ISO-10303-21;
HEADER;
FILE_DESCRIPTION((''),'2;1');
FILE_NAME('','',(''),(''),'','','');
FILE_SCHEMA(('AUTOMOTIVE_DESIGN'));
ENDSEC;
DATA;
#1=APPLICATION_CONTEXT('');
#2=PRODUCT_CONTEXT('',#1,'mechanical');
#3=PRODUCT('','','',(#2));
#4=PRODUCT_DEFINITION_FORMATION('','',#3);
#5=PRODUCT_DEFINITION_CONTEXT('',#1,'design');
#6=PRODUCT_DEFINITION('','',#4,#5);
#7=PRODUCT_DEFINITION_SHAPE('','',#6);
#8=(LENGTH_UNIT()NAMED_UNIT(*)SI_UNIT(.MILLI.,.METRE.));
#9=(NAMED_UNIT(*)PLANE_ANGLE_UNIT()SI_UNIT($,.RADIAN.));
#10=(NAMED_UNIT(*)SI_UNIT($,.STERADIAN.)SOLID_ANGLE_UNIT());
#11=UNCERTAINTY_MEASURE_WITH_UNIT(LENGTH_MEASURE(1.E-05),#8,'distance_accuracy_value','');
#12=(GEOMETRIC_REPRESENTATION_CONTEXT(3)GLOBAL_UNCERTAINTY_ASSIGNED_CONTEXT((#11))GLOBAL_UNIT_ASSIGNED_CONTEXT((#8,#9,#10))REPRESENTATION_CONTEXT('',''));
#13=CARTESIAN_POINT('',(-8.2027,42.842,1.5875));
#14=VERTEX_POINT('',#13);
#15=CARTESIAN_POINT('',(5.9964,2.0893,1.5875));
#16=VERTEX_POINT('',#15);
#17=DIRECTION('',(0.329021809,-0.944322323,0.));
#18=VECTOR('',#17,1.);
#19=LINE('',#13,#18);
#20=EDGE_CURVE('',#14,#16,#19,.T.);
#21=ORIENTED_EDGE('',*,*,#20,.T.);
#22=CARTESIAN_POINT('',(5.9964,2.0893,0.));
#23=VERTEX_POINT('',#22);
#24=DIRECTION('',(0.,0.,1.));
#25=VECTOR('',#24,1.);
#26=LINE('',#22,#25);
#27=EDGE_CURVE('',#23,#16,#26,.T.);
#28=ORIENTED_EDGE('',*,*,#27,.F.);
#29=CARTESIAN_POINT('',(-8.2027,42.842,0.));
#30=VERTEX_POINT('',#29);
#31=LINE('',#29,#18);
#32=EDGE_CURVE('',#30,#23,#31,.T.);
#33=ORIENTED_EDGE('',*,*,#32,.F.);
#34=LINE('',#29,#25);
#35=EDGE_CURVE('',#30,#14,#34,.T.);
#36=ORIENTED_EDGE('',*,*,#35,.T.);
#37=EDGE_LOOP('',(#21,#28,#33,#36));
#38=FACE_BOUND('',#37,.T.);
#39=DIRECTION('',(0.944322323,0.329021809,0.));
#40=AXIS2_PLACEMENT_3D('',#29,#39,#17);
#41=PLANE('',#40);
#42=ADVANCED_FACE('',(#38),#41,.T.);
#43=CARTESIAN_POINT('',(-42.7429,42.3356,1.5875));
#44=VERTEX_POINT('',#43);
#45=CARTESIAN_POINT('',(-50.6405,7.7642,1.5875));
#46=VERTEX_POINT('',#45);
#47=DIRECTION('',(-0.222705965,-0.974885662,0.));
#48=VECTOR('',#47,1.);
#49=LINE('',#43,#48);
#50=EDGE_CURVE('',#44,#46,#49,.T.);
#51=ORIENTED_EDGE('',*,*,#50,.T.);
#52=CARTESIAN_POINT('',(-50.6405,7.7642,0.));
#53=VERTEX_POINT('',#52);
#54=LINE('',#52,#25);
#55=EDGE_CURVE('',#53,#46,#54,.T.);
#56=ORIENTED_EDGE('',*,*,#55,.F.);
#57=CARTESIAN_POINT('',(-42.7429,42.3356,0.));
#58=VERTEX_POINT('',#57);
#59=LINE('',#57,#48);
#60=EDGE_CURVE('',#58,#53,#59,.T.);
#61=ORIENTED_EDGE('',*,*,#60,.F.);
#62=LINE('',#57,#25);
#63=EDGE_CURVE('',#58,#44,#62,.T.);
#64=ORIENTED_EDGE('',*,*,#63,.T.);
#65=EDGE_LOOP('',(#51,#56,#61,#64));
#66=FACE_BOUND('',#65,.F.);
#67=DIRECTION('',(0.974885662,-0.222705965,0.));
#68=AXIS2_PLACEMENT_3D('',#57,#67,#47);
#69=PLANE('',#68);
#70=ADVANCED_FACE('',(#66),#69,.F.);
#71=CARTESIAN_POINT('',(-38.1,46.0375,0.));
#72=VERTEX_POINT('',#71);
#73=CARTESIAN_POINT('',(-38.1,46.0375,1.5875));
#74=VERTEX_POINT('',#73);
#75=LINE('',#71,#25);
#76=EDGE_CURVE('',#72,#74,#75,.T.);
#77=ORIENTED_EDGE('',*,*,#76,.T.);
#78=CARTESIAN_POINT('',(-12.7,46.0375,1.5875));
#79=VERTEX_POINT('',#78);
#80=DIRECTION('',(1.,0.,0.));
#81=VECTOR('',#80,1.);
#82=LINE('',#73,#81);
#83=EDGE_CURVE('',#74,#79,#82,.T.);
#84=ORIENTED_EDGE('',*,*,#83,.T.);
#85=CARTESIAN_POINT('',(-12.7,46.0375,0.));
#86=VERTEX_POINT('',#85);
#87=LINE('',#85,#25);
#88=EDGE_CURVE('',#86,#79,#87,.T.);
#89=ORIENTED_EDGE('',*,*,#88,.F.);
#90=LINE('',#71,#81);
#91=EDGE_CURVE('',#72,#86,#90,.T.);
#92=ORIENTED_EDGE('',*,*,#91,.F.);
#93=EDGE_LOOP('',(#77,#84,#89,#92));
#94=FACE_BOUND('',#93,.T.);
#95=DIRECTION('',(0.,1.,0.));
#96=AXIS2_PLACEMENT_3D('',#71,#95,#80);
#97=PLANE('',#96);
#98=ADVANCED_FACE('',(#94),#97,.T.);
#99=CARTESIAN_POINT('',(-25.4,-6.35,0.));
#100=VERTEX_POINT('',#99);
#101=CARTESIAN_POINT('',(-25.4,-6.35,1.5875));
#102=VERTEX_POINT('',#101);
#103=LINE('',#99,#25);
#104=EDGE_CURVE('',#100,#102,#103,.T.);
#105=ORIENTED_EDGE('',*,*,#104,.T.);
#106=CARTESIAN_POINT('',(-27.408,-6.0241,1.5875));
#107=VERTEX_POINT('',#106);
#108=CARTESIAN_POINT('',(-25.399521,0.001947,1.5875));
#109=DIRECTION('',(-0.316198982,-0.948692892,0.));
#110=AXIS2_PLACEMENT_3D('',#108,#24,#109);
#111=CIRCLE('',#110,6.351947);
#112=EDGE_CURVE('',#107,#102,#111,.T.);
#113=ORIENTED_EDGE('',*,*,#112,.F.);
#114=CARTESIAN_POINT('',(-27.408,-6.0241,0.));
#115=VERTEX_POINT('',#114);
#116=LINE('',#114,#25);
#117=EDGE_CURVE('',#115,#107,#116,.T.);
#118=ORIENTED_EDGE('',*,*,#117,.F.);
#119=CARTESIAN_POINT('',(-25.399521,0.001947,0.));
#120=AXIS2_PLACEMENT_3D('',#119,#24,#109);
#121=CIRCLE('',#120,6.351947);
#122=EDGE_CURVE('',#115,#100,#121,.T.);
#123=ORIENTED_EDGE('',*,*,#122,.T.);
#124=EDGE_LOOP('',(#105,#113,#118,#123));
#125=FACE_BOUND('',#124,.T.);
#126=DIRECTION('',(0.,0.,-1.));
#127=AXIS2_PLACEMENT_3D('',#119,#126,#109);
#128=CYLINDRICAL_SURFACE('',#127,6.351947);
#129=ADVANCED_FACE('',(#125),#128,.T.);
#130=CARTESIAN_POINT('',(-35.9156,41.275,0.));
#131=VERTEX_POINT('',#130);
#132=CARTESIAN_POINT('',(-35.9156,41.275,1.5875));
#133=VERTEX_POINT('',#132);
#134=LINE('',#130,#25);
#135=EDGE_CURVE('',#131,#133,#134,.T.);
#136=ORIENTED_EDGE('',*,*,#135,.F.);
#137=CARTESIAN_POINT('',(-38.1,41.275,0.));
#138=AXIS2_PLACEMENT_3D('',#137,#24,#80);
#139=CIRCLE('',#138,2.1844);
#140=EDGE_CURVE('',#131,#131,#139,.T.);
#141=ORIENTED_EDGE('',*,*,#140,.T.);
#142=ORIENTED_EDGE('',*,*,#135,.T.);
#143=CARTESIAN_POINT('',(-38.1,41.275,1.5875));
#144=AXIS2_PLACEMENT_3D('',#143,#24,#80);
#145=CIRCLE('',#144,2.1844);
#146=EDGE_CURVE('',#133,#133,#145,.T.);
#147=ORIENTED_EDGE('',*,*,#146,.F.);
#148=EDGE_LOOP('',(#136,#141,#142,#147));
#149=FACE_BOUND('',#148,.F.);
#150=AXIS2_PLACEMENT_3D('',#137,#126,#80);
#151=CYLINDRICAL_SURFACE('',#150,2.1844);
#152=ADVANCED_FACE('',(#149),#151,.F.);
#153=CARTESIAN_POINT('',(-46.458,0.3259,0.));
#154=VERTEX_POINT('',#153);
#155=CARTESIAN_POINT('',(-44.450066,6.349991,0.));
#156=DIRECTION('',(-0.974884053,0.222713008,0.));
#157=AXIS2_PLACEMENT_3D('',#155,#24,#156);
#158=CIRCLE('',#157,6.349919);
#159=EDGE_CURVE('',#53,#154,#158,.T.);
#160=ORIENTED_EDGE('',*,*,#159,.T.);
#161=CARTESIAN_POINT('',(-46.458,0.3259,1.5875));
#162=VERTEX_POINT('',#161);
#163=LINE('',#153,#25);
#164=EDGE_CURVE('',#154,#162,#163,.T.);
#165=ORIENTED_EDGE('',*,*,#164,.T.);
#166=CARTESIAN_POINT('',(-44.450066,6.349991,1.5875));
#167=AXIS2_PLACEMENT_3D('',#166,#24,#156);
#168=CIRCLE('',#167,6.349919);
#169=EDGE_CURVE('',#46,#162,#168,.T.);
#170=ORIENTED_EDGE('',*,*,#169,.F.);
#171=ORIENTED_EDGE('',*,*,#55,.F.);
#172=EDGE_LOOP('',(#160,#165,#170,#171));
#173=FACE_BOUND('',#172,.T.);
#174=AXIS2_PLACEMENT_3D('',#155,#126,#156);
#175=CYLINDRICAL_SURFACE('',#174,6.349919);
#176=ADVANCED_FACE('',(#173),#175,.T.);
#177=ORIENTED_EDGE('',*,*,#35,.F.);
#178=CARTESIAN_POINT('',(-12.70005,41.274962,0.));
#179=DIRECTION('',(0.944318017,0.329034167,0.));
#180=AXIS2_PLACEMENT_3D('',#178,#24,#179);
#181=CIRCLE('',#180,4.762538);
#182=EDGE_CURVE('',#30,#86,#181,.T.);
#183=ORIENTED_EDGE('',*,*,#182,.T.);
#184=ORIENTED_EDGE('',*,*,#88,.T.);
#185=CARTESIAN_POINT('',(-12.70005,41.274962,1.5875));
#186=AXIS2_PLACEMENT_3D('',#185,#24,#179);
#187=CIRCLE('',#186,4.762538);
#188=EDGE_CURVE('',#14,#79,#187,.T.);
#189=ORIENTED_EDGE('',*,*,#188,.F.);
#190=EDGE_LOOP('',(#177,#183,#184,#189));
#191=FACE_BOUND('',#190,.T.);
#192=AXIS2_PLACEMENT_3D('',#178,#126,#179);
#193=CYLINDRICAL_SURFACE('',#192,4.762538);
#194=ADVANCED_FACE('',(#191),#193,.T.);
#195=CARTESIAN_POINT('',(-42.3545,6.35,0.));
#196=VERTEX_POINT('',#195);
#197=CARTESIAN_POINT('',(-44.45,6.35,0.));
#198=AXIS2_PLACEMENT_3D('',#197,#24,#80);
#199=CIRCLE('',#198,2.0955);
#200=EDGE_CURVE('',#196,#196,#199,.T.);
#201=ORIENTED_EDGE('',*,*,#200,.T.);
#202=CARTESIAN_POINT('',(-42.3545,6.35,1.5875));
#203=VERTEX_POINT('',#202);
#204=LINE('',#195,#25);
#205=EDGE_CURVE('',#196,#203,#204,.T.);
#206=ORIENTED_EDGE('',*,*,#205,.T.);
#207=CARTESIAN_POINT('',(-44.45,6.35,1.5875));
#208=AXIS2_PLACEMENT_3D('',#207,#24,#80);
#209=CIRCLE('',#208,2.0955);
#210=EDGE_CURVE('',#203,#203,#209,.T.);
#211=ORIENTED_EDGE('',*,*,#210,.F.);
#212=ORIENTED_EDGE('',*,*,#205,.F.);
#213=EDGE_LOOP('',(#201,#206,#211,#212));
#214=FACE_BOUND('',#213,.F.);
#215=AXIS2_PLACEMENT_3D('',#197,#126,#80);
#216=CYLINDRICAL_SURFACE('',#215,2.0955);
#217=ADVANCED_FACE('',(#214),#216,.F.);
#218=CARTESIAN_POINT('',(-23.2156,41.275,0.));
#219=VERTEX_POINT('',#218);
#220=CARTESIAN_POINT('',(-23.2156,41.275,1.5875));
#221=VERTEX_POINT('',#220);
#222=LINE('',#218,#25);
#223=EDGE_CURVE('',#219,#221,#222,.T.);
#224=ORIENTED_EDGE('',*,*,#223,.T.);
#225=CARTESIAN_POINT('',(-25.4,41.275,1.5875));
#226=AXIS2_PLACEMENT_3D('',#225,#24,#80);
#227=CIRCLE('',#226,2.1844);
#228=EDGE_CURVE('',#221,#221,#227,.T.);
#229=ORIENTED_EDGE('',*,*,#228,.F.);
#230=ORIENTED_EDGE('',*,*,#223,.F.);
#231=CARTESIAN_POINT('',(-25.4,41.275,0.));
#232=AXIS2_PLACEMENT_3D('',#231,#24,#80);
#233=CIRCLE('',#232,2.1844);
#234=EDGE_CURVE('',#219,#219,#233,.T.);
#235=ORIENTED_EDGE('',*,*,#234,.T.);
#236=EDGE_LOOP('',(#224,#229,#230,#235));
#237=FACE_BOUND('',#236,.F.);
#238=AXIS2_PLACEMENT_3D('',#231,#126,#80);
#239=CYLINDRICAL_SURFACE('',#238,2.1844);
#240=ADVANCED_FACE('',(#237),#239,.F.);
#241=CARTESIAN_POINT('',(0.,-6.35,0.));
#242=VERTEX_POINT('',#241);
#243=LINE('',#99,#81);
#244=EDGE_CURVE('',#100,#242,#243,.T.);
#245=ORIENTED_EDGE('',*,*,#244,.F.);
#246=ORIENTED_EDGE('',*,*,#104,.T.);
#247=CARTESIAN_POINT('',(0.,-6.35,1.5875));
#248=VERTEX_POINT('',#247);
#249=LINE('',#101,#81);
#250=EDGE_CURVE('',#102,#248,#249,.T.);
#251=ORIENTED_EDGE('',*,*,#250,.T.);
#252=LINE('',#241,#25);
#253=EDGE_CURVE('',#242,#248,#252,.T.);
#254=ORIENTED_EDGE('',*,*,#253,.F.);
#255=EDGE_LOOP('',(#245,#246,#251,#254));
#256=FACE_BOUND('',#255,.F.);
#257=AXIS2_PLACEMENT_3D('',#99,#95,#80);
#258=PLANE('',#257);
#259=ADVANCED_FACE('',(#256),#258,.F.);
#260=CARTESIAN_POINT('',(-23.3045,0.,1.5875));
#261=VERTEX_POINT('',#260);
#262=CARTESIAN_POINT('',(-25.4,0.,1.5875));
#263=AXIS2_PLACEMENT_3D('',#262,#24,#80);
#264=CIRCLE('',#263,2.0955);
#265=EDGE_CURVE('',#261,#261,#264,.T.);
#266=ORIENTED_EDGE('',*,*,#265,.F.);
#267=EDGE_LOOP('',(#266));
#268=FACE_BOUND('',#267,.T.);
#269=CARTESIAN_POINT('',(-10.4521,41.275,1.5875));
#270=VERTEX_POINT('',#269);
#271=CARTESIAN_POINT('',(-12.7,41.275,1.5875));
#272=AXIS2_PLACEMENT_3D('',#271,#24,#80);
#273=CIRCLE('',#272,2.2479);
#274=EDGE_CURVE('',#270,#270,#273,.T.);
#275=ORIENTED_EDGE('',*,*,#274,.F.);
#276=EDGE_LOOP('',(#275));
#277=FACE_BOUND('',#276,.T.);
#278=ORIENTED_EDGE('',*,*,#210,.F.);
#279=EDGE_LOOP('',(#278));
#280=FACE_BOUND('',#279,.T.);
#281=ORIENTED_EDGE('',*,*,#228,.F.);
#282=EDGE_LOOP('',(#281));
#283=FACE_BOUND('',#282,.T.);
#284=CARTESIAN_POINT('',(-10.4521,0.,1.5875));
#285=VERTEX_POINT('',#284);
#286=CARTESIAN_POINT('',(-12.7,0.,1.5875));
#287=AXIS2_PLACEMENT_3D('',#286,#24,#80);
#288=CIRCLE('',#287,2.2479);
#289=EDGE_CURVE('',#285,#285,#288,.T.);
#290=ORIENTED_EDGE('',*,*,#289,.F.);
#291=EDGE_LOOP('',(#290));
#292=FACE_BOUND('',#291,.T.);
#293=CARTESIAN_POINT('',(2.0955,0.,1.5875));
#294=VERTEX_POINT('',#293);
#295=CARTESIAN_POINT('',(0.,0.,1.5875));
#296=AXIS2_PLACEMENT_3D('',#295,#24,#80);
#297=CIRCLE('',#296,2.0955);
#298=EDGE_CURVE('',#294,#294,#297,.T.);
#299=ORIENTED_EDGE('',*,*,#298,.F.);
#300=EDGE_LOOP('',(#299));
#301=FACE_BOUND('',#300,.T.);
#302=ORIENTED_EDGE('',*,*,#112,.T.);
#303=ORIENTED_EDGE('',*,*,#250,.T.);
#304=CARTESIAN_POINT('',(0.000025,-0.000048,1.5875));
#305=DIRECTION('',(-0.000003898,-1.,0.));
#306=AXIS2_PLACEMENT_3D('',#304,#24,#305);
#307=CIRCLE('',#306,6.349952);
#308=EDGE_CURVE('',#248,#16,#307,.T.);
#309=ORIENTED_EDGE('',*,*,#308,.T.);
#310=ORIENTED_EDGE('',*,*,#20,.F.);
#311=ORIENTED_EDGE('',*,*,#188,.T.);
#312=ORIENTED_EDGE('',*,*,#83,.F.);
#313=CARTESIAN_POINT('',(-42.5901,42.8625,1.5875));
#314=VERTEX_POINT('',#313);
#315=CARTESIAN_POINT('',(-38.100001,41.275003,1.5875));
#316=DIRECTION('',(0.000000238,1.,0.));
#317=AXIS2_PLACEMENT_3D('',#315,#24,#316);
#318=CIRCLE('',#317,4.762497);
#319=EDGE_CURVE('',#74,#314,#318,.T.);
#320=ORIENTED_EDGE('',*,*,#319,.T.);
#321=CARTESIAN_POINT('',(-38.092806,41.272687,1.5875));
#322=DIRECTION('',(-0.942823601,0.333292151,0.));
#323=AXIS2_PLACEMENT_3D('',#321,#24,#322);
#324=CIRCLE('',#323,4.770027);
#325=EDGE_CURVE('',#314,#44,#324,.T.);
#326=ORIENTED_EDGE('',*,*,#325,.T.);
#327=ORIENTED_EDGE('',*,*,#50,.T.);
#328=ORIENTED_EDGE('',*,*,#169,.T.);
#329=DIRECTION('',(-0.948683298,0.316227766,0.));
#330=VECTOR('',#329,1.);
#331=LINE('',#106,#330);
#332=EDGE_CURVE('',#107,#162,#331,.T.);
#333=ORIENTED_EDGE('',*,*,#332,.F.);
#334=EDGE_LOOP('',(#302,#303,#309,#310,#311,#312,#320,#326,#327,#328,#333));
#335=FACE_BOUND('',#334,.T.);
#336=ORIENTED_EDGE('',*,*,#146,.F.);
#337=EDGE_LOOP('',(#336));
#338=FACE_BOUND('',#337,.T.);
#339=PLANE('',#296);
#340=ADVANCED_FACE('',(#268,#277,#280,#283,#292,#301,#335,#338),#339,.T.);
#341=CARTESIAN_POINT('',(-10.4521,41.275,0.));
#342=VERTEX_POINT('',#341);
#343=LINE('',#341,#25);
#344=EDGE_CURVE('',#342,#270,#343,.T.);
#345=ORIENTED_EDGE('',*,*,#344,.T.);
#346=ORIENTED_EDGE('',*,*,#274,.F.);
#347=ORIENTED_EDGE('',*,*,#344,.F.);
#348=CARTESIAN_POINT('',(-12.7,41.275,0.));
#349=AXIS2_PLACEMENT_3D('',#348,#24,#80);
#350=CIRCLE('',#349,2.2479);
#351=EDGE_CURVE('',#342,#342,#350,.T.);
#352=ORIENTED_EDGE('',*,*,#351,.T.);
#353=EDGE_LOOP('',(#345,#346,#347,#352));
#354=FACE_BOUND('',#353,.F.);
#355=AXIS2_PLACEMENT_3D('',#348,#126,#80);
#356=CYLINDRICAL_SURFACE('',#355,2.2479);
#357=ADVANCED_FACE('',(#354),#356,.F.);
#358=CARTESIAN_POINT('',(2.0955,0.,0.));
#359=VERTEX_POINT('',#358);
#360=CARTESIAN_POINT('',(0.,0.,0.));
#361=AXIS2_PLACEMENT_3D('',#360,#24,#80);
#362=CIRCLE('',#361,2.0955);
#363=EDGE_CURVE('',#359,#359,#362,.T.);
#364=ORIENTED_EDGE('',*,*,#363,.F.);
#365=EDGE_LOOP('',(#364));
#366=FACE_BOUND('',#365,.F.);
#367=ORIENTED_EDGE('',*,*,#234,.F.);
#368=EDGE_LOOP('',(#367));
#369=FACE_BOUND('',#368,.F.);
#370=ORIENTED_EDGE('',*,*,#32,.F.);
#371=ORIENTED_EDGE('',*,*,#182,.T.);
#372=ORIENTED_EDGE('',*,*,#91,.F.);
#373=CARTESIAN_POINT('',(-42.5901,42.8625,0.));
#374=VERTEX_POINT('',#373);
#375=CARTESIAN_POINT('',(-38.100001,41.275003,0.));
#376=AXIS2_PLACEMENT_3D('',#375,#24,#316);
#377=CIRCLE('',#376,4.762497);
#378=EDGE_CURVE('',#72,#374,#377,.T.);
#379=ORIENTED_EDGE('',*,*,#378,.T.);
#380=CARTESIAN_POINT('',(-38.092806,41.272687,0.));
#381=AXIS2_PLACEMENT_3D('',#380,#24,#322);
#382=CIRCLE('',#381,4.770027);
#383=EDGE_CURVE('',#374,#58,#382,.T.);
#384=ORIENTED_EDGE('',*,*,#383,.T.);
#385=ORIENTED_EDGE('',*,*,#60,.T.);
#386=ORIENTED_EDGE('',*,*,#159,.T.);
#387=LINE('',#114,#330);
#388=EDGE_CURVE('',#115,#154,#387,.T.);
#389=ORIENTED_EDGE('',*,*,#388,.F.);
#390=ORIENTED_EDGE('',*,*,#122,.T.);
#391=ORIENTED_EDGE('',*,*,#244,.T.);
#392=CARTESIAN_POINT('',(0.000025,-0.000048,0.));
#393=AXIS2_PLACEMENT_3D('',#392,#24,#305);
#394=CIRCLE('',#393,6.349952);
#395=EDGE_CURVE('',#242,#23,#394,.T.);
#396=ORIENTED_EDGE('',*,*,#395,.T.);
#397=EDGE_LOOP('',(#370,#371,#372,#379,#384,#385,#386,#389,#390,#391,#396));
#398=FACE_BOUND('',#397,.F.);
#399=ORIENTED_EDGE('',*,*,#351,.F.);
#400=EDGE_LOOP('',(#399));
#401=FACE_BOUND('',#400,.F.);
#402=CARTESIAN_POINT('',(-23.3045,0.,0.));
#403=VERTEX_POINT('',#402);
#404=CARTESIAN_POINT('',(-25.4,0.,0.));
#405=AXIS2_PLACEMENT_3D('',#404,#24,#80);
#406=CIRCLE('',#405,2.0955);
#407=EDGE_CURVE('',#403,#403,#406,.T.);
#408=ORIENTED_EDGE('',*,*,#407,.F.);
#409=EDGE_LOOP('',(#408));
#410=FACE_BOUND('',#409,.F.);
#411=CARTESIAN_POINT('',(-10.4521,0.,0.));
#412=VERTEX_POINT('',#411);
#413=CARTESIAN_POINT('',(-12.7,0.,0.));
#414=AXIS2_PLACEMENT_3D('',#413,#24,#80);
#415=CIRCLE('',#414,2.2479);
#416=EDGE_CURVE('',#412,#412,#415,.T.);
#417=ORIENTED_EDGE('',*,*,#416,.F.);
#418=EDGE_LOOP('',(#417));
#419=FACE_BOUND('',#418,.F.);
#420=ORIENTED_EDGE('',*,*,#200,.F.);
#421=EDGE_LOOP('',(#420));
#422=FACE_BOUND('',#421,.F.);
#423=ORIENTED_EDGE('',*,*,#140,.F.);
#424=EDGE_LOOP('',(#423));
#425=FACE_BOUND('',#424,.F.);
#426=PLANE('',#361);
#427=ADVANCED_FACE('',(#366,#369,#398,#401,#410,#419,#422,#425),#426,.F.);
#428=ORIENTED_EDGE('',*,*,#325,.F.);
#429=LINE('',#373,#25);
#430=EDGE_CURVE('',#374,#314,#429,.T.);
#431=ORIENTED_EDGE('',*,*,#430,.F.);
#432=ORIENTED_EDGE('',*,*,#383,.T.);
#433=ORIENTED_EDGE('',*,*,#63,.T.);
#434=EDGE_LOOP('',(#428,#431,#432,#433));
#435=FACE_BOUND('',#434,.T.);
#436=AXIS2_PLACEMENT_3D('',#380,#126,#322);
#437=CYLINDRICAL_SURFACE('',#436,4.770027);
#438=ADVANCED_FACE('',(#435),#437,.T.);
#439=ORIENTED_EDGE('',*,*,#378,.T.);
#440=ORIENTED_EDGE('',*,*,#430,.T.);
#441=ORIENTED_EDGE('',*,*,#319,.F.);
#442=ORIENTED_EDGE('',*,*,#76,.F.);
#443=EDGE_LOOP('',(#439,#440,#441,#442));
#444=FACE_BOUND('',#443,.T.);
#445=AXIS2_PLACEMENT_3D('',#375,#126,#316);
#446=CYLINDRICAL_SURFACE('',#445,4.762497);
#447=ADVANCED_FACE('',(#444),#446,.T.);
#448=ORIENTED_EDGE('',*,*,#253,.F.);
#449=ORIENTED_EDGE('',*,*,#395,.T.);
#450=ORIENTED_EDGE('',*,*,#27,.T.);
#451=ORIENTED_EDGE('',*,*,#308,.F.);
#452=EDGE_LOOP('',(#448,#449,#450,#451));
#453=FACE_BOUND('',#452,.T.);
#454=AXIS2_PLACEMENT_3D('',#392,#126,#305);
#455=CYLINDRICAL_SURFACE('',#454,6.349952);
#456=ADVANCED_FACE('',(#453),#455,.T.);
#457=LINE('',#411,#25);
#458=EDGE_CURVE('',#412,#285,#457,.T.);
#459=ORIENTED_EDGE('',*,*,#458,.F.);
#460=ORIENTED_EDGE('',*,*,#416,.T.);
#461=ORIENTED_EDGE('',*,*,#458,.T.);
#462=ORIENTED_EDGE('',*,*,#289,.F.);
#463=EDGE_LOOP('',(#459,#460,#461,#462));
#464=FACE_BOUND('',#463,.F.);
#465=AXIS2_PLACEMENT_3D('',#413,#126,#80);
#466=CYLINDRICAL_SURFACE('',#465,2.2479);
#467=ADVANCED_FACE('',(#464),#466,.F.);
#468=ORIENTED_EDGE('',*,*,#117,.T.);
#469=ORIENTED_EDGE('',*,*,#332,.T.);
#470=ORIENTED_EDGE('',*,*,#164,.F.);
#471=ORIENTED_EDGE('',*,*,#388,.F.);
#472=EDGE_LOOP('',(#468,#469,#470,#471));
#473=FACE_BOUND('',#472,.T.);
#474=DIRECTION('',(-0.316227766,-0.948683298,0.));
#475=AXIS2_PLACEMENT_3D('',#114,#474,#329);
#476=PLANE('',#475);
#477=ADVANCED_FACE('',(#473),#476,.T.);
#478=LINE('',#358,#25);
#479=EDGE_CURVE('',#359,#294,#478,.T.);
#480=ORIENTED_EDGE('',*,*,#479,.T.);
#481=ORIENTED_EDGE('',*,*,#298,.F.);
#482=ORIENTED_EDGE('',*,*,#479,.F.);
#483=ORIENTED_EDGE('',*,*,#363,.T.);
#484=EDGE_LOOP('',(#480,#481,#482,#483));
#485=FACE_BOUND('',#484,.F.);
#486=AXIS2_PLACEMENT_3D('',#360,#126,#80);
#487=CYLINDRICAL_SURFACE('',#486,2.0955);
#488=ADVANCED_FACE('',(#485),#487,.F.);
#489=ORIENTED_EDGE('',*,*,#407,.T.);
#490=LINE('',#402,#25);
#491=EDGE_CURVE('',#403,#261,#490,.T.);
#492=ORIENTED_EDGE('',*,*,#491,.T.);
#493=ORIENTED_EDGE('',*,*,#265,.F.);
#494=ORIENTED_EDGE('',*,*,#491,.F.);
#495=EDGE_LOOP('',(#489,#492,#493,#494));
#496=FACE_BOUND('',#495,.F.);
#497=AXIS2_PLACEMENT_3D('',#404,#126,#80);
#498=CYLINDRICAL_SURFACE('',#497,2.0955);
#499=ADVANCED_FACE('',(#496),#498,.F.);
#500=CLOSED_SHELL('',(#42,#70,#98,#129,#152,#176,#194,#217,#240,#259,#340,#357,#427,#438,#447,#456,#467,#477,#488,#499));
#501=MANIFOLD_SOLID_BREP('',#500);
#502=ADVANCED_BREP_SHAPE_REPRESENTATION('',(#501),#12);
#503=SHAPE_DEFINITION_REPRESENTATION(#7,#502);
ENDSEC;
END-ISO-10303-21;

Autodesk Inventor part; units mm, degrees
ref_plane "YZ Plane" through (0, 0, 0) normal (1, 0, 0) x (0, 1, 0)
ref_plane "XZ Plane" through (0, 0, 0) normal (0, 1, 0) x (-1, 0, 0)
ref_plane "XY Plane" through (0, 0, 0) normal (0, 0, 1) x (1, 0, 0)
sketch "main" plane through (0, 0, 0) normal (0, 0, 1) x (1, 0, 0)
  circle A0 centre (-38.8868, 18.5788) radius 2.2479
  circle A1 centre (2.3882, 18.5788) radius 2.2479
  circle A2 centre (2.3882, 43.9788) radius 2.1844
  arc A3 (3.9757, 48.4689) -> (3.4489, 48.6217) centre (2.3882, 43.9788) ccw
  arc A4 (3.9552, 14.0814) -> (7.1507, 18.5788) centre (2.3882, 18.5788) ccw
  circle A5 centre (-38.8868, 31.2788) radius 2.0955
  circle A6 centre (-38.8868, 5.8788) radius 2.0955
  arc A7 (-44.9109, 33.2868) -> (-45.2368, 31.2788) centre (-38.8868, 31.2788) ccw
  arc A8 (-45.2368, 5.8788) -> (-36.7975, -0.1177) centre (-38.8868, 5.8788) ccw
  circle A9 centre (-32.5368, 50.3288) radius 2.0955
  arc A10 (-31.1226, 56.5193) -> (-38.5609, 52.3368) centre (-32.5368, 50.3288) ccw
  line L0 (-44.9109, 33.2868) -> (-38.5609, 52.3368)
  line L1 (3.4489, 48.6217) -> (-31.1226, 56.5193)
  line L2 (3.9552, 14.0814) -> (-36.7975, -0.1177)
  line L3 (-45.2368, 31.2788) -> (-45.2368, 5.8788)
  arc A11 (7.1507, 43.9788) -> (3.4489, 48.6217) centre (2.3882, 43.9788) ccw
  line L4 (7.1507, 43.9788) -> (7.1507, 18.5788)
  circle A12 centre (2.3882, 31.2788) radius 2.1844
  point P0 (-4.3882, 4.0845)
  dimension "d11" = 4.4958
  dimension "d12" = 4.4958
  dimension "d13" = 9.525
  dimension "d14" = 9.525
  dimension "d15" = 4.191
  dimension "d16" = 4.191
  dimension "d17" = 41.275
  dimension "d18" = 41.275
  dimension "d19" = 25.4
  dimension "d20" = 4.3688
  dimension "d21" = 12.7
sketch "Sketch1" plane through (0, 0, 0) normal (0, 0, 1) x (1, 0, 0)
  circle A0 centre (-12.7, 0) radius 2.2479
  circle A1 centre (-12.7, 41.275) radius 2.2479
  circle A2 centre (-38.1, 41.275) radius 2.1844
  arc A3 (-42.5901, 42.8625) -> (-42.7429, 42.3356) centre (-38.1, 41.275) ccw
  arc A4 (-8.2027, 42.842) -> (-12.7, 46.0375) centre (-12.7, 41.275) ccw
  circle A5 centre (-25.4, 0) radius 2.0955
  circle A6 centre (0, 0) radius 2.0955
  arc A7 (-27.408, -6.0241) -> (-25.4, -6.35) centre (-25.4, 0) ccw
  arc A8 (0, -6.35) -> (5.9964, 2.0893) centre (0, 0) ccw
  circle A9 centre (-44.45, 6.35) radius 2.0955
  arc A10 (-50.6405, 7.7642) -> (-46.458, 0.3259) centre (-44.45, 6.35) ccw
  line L0 (-27.408, -6.0241) -> (-46.458, 0.3259)
  line L1 (-42.7429, 42.3356) -> (-50.6405, 7.7642)
  line L2 (-8.2027, 42.842) -> (5.9964, 2.0893)
  line L3 (-25.4, -6.35) -> (0, -6.35)
  arc A11 (-38.1, 46.0375) -> (-42.7429, 42.3356) centre (-38.1, 41.275) ccw
  line L4 (-38.1, 46.0375) -> (-12.7, 46.0375)
  circle A12 centre (-25.4, 41.275) radius 2.1844
  point P0 (0, 0)
  point P1 (-42.5901, 42.8625)
extrude "Extrusion1" add sketch "Sketch1" along normal blind 1.5875
properties part number "gusset" material "Acetal Resin, White"
